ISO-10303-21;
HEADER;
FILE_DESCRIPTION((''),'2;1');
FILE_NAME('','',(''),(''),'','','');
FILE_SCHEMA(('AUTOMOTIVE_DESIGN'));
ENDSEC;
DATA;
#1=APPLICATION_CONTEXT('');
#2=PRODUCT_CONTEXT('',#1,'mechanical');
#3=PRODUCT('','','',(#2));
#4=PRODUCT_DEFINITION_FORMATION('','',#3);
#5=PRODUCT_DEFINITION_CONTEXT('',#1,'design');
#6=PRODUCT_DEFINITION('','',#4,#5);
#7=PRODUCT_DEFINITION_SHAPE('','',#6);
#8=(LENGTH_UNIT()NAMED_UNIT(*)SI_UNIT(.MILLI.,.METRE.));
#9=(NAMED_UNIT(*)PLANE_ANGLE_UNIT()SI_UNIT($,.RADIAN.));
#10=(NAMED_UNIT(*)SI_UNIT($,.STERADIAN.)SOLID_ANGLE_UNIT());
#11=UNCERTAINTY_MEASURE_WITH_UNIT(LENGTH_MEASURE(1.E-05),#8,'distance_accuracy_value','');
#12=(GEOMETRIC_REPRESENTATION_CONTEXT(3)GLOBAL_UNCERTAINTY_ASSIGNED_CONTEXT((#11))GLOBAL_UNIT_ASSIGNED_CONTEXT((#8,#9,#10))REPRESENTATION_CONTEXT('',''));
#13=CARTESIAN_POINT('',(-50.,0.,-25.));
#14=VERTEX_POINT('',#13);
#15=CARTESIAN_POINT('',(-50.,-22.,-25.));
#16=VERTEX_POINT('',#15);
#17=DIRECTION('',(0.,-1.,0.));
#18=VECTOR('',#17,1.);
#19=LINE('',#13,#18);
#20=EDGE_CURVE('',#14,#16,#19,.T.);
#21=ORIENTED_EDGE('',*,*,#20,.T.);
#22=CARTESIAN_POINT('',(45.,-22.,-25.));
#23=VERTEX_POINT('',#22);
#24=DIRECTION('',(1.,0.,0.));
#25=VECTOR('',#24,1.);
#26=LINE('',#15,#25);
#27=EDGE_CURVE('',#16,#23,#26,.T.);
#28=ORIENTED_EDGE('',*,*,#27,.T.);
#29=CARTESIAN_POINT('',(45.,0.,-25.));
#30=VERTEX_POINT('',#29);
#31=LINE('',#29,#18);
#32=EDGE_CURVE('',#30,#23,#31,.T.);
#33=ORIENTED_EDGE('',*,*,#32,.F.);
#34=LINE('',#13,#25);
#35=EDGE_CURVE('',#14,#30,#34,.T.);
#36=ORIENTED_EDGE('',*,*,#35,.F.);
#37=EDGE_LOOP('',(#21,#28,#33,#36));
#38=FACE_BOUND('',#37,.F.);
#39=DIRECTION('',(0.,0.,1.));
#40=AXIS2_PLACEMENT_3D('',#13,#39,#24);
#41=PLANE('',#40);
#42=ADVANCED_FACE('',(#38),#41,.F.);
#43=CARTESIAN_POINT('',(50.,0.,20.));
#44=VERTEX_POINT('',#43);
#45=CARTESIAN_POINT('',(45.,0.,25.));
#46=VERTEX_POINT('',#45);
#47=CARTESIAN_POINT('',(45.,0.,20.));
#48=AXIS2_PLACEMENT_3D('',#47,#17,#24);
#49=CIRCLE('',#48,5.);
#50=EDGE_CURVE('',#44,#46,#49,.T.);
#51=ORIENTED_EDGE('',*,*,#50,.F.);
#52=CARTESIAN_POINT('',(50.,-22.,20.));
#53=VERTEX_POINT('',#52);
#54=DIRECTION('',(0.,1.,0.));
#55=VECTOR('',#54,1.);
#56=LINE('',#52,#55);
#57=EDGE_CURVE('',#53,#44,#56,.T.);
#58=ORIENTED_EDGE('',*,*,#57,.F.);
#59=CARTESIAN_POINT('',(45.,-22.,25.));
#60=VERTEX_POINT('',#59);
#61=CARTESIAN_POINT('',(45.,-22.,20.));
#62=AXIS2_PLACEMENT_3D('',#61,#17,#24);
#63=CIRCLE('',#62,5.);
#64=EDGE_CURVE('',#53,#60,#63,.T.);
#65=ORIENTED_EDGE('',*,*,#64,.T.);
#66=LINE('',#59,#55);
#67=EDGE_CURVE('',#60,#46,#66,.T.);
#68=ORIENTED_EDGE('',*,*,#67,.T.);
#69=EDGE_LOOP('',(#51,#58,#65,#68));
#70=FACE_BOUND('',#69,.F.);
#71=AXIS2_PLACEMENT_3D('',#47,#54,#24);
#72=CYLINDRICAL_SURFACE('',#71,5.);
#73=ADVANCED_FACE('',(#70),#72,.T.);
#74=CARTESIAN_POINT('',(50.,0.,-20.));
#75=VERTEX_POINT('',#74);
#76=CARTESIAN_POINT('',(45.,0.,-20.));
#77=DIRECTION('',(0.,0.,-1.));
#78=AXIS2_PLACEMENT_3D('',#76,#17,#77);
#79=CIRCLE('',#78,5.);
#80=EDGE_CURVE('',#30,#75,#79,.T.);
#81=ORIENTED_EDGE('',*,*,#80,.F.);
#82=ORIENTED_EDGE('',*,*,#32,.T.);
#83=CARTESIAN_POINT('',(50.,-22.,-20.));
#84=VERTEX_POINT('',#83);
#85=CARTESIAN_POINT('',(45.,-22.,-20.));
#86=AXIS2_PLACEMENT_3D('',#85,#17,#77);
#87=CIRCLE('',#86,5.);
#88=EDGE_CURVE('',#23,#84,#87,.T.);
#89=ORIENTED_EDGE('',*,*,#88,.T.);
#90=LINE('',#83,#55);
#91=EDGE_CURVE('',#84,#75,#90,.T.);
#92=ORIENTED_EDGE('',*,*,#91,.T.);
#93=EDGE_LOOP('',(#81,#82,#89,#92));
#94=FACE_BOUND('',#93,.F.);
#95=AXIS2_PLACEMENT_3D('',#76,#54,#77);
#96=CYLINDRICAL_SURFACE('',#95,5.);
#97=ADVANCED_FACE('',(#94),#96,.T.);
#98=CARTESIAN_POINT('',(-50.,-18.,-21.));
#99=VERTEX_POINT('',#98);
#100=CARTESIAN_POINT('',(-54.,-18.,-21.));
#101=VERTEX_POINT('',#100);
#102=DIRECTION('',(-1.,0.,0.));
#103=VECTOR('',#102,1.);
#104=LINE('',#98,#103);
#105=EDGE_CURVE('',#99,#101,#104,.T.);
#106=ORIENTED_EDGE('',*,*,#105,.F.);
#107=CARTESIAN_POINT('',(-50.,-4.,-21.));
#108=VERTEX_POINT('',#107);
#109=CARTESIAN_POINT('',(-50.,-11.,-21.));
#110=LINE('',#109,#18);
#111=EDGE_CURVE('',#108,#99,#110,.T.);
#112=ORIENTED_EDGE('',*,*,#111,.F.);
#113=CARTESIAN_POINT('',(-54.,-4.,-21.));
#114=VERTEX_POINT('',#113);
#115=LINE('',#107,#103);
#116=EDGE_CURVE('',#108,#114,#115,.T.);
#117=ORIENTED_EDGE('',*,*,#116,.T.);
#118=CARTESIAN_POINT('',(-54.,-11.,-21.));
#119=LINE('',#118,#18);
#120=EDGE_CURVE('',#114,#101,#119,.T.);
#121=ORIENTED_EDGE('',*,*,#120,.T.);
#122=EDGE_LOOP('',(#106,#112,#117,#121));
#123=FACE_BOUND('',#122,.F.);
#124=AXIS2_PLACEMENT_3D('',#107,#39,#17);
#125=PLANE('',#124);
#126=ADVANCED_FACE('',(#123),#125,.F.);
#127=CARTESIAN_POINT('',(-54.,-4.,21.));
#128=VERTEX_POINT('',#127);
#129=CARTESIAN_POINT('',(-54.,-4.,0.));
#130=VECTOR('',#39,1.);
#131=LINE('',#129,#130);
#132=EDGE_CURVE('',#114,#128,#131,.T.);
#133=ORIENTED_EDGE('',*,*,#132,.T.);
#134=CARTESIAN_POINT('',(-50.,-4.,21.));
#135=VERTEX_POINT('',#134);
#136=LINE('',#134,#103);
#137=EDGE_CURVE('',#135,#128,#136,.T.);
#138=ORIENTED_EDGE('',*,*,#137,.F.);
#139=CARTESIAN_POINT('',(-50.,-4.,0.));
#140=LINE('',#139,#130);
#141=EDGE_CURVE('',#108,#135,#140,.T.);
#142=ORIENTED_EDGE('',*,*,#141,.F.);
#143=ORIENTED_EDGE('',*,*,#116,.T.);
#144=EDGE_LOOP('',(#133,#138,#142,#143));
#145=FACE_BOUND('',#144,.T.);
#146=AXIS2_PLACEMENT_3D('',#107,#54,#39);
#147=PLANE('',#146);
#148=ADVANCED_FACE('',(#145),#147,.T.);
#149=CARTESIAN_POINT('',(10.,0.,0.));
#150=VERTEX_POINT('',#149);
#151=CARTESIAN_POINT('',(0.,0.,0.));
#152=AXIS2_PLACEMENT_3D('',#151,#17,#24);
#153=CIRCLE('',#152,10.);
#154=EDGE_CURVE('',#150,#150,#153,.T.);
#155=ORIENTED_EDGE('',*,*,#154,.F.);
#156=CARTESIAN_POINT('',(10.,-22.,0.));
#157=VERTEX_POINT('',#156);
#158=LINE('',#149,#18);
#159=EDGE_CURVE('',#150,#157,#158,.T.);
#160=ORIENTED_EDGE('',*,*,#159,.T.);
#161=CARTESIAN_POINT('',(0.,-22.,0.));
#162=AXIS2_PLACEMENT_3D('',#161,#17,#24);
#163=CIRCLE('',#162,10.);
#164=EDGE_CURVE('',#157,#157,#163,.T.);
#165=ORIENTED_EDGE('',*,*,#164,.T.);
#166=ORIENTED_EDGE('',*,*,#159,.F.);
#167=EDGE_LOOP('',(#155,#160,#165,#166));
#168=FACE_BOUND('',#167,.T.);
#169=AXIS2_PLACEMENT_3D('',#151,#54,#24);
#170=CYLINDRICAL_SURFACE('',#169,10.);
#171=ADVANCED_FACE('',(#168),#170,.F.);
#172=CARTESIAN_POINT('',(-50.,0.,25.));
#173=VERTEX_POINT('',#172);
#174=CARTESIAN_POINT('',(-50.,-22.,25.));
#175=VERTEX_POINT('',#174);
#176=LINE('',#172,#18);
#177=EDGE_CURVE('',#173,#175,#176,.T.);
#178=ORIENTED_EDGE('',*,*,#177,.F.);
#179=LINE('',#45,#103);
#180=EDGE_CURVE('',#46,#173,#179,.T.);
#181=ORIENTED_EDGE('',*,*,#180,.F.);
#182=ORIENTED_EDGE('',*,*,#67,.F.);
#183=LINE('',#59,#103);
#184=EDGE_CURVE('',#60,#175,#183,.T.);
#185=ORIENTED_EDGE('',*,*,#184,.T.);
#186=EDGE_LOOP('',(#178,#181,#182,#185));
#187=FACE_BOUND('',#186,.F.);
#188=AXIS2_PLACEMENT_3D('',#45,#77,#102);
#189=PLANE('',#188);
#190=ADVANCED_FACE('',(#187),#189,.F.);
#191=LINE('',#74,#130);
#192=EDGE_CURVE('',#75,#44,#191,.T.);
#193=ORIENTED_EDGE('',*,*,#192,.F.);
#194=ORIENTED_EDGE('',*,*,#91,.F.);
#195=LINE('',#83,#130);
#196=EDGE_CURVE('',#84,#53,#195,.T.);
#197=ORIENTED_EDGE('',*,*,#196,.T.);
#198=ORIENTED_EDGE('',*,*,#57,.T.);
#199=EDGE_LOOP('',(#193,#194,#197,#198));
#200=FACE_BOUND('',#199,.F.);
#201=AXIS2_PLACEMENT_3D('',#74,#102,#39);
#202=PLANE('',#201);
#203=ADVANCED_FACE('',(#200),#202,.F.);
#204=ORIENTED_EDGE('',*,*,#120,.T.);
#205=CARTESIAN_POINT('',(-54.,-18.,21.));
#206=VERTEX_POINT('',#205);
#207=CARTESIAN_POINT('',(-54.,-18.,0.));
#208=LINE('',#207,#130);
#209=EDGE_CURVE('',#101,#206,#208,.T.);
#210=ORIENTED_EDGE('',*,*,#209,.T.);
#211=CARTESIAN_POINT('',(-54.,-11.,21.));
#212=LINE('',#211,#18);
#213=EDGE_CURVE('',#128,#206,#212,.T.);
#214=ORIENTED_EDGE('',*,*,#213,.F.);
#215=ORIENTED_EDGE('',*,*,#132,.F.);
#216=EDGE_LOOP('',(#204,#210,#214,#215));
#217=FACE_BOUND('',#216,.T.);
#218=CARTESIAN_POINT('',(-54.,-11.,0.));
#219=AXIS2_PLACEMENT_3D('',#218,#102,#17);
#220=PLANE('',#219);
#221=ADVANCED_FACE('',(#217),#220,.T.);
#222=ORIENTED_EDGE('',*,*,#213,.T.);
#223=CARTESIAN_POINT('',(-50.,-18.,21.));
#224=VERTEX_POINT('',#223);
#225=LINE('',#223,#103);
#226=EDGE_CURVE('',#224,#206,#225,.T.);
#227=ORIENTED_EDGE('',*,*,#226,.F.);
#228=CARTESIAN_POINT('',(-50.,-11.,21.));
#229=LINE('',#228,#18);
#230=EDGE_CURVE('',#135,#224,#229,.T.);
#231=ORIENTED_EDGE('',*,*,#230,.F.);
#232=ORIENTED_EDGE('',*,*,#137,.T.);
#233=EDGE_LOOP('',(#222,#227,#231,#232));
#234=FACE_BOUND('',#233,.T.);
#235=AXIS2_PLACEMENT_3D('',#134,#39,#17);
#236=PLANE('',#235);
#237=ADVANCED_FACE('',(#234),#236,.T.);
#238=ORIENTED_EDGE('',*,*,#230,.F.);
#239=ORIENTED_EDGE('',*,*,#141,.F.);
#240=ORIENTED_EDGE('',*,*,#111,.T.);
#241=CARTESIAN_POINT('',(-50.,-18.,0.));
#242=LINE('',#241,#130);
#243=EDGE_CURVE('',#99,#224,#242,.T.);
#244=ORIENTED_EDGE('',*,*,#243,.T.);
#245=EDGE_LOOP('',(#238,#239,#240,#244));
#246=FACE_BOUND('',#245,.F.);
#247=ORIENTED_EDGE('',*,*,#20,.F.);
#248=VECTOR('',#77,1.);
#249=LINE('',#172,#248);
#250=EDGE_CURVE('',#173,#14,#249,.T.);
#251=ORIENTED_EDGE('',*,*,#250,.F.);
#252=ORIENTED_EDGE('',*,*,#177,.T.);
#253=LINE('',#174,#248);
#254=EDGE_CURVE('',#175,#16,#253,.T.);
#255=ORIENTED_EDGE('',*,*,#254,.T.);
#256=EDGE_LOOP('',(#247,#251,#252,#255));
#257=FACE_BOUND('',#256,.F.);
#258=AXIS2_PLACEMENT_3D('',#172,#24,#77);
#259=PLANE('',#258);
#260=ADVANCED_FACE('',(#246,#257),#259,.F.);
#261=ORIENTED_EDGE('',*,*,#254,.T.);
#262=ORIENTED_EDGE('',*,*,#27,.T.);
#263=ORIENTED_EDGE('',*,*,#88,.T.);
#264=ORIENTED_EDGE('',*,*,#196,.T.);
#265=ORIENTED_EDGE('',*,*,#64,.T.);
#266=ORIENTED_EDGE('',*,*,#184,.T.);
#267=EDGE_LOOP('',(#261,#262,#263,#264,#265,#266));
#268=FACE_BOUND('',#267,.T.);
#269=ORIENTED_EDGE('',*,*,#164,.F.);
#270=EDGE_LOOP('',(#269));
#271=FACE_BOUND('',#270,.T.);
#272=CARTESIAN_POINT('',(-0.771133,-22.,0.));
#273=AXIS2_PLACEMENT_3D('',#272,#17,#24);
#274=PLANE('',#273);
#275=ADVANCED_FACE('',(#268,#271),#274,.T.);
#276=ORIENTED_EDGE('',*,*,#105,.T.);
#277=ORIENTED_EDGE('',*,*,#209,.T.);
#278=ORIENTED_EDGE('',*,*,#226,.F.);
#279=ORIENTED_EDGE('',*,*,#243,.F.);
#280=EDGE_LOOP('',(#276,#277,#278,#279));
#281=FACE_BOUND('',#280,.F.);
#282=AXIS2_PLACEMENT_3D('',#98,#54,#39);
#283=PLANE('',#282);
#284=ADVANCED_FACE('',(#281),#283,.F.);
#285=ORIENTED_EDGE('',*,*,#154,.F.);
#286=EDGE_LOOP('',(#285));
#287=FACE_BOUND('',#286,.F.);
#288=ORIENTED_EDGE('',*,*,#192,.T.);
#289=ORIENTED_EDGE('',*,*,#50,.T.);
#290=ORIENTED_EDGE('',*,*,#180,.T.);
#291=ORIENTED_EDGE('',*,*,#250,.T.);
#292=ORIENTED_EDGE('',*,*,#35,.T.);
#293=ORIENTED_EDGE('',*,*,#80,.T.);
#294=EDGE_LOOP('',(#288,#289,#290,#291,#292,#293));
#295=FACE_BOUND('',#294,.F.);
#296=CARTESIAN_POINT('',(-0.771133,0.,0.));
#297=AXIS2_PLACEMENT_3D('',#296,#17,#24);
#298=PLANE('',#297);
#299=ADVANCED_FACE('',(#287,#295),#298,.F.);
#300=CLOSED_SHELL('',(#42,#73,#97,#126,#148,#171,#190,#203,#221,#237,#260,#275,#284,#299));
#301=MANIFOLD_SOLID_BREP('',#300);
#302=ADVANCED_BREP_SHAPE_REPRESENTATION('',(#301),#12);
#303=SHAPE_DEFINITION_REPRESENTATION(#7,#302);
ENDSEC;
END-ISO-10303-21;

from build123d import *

# Parameters (mm, degrees)
F0_R      = 10
F1_DEPTH  = 20
F1_FACE_R = 10
F2_DEPTH  = 2
F3_W      = 14
F3_H      = 42
F4_DEPTH  = 4


# Not quite as in the source:
# - the program builds the solid bodies; features that only make, move or delete a surface that nothing else refers to are left out


with BuildPart() as f1:
    # F0 (on Front) → F1 (new body)
    with BuildSketch(Plane.XZ):
        with BuildLine():
            Line((45, 25), (-50, 25))
            Line((-50, 25), (-50, -25))
            Line((-50, -25), (45, -25))
            ThreePointArc((45, -25), (48.5355339059, -23.5355339059), (50, -20))
            Line((50, -20), (50, 20))
            ThreePointArc((50, 20), (48.5355339059, 23.5355339059), (45, 25))
        make_face()
        Circle(F0_R, mode=Mode.SUBTRACT)
    extrude(amount=F1_DEPTH)

    # F0 (on Front) + F1_face (on face) → F2 (join)
    with BuildSketch(Plane.XZ):
        with BuildLine():
            Line((45, 25), (-50, 25))
            Line((-50, 25), (-50, -25))
            Line((-50, -25), (45, -25))
            ThreePointArc((45, -25), (48.5355339059, -23.5355339059), (50, -20))
            Line((50, -20), (50, 20))
            ThreePointArc((50, 20), (48.5355339059, 23.5355339059), (45, 25))
        make_face()
        Circle(F0_R, mode=Mode.SUBTRACT)
    with BuildSketch(Plane(origin=(-0.1121943071, -20, 0), x_dir=(1, 0, 0), z_dir=(0, -1, 0))):
        with BuildLine():
            Line((45.1121943071, 25), (-49.8878056929, 25))
            Line((-49.8878056929, 25), (-49.8878056929, -25))
            Line((-49.8878056929, -25), (45.1121943071, -25))
            ThreePointArc((45.1121943071, -25), (48.647728213, -23.5355339059), (50.1121943071, -20))
            Line((50.1121943071, -20), (50.1121943071, 20))
            ThreePointArc((50.1121943071, 20), (48.647728213, 23.5355339059), (45.1121943071, 25))
        make_face()
        with Locations((0.1121943071, 0)):
            Circle(F1_FACE_R, mode=Mode.SUBTRACT)
    extrude(amount=F2_DEPTH)

    # F3 (on face) → F4 (join)
    with BuildSketch(Plane(origin=(-50, 0, 0), x_dir=(0, -1, 0), z_dir=(-1, 0, 0))):
        with Locations((11, 0)):
            Rectangle(F3_W, F3_H)
    extrude(amount=F4_DEPTH)


solid = f1.part
